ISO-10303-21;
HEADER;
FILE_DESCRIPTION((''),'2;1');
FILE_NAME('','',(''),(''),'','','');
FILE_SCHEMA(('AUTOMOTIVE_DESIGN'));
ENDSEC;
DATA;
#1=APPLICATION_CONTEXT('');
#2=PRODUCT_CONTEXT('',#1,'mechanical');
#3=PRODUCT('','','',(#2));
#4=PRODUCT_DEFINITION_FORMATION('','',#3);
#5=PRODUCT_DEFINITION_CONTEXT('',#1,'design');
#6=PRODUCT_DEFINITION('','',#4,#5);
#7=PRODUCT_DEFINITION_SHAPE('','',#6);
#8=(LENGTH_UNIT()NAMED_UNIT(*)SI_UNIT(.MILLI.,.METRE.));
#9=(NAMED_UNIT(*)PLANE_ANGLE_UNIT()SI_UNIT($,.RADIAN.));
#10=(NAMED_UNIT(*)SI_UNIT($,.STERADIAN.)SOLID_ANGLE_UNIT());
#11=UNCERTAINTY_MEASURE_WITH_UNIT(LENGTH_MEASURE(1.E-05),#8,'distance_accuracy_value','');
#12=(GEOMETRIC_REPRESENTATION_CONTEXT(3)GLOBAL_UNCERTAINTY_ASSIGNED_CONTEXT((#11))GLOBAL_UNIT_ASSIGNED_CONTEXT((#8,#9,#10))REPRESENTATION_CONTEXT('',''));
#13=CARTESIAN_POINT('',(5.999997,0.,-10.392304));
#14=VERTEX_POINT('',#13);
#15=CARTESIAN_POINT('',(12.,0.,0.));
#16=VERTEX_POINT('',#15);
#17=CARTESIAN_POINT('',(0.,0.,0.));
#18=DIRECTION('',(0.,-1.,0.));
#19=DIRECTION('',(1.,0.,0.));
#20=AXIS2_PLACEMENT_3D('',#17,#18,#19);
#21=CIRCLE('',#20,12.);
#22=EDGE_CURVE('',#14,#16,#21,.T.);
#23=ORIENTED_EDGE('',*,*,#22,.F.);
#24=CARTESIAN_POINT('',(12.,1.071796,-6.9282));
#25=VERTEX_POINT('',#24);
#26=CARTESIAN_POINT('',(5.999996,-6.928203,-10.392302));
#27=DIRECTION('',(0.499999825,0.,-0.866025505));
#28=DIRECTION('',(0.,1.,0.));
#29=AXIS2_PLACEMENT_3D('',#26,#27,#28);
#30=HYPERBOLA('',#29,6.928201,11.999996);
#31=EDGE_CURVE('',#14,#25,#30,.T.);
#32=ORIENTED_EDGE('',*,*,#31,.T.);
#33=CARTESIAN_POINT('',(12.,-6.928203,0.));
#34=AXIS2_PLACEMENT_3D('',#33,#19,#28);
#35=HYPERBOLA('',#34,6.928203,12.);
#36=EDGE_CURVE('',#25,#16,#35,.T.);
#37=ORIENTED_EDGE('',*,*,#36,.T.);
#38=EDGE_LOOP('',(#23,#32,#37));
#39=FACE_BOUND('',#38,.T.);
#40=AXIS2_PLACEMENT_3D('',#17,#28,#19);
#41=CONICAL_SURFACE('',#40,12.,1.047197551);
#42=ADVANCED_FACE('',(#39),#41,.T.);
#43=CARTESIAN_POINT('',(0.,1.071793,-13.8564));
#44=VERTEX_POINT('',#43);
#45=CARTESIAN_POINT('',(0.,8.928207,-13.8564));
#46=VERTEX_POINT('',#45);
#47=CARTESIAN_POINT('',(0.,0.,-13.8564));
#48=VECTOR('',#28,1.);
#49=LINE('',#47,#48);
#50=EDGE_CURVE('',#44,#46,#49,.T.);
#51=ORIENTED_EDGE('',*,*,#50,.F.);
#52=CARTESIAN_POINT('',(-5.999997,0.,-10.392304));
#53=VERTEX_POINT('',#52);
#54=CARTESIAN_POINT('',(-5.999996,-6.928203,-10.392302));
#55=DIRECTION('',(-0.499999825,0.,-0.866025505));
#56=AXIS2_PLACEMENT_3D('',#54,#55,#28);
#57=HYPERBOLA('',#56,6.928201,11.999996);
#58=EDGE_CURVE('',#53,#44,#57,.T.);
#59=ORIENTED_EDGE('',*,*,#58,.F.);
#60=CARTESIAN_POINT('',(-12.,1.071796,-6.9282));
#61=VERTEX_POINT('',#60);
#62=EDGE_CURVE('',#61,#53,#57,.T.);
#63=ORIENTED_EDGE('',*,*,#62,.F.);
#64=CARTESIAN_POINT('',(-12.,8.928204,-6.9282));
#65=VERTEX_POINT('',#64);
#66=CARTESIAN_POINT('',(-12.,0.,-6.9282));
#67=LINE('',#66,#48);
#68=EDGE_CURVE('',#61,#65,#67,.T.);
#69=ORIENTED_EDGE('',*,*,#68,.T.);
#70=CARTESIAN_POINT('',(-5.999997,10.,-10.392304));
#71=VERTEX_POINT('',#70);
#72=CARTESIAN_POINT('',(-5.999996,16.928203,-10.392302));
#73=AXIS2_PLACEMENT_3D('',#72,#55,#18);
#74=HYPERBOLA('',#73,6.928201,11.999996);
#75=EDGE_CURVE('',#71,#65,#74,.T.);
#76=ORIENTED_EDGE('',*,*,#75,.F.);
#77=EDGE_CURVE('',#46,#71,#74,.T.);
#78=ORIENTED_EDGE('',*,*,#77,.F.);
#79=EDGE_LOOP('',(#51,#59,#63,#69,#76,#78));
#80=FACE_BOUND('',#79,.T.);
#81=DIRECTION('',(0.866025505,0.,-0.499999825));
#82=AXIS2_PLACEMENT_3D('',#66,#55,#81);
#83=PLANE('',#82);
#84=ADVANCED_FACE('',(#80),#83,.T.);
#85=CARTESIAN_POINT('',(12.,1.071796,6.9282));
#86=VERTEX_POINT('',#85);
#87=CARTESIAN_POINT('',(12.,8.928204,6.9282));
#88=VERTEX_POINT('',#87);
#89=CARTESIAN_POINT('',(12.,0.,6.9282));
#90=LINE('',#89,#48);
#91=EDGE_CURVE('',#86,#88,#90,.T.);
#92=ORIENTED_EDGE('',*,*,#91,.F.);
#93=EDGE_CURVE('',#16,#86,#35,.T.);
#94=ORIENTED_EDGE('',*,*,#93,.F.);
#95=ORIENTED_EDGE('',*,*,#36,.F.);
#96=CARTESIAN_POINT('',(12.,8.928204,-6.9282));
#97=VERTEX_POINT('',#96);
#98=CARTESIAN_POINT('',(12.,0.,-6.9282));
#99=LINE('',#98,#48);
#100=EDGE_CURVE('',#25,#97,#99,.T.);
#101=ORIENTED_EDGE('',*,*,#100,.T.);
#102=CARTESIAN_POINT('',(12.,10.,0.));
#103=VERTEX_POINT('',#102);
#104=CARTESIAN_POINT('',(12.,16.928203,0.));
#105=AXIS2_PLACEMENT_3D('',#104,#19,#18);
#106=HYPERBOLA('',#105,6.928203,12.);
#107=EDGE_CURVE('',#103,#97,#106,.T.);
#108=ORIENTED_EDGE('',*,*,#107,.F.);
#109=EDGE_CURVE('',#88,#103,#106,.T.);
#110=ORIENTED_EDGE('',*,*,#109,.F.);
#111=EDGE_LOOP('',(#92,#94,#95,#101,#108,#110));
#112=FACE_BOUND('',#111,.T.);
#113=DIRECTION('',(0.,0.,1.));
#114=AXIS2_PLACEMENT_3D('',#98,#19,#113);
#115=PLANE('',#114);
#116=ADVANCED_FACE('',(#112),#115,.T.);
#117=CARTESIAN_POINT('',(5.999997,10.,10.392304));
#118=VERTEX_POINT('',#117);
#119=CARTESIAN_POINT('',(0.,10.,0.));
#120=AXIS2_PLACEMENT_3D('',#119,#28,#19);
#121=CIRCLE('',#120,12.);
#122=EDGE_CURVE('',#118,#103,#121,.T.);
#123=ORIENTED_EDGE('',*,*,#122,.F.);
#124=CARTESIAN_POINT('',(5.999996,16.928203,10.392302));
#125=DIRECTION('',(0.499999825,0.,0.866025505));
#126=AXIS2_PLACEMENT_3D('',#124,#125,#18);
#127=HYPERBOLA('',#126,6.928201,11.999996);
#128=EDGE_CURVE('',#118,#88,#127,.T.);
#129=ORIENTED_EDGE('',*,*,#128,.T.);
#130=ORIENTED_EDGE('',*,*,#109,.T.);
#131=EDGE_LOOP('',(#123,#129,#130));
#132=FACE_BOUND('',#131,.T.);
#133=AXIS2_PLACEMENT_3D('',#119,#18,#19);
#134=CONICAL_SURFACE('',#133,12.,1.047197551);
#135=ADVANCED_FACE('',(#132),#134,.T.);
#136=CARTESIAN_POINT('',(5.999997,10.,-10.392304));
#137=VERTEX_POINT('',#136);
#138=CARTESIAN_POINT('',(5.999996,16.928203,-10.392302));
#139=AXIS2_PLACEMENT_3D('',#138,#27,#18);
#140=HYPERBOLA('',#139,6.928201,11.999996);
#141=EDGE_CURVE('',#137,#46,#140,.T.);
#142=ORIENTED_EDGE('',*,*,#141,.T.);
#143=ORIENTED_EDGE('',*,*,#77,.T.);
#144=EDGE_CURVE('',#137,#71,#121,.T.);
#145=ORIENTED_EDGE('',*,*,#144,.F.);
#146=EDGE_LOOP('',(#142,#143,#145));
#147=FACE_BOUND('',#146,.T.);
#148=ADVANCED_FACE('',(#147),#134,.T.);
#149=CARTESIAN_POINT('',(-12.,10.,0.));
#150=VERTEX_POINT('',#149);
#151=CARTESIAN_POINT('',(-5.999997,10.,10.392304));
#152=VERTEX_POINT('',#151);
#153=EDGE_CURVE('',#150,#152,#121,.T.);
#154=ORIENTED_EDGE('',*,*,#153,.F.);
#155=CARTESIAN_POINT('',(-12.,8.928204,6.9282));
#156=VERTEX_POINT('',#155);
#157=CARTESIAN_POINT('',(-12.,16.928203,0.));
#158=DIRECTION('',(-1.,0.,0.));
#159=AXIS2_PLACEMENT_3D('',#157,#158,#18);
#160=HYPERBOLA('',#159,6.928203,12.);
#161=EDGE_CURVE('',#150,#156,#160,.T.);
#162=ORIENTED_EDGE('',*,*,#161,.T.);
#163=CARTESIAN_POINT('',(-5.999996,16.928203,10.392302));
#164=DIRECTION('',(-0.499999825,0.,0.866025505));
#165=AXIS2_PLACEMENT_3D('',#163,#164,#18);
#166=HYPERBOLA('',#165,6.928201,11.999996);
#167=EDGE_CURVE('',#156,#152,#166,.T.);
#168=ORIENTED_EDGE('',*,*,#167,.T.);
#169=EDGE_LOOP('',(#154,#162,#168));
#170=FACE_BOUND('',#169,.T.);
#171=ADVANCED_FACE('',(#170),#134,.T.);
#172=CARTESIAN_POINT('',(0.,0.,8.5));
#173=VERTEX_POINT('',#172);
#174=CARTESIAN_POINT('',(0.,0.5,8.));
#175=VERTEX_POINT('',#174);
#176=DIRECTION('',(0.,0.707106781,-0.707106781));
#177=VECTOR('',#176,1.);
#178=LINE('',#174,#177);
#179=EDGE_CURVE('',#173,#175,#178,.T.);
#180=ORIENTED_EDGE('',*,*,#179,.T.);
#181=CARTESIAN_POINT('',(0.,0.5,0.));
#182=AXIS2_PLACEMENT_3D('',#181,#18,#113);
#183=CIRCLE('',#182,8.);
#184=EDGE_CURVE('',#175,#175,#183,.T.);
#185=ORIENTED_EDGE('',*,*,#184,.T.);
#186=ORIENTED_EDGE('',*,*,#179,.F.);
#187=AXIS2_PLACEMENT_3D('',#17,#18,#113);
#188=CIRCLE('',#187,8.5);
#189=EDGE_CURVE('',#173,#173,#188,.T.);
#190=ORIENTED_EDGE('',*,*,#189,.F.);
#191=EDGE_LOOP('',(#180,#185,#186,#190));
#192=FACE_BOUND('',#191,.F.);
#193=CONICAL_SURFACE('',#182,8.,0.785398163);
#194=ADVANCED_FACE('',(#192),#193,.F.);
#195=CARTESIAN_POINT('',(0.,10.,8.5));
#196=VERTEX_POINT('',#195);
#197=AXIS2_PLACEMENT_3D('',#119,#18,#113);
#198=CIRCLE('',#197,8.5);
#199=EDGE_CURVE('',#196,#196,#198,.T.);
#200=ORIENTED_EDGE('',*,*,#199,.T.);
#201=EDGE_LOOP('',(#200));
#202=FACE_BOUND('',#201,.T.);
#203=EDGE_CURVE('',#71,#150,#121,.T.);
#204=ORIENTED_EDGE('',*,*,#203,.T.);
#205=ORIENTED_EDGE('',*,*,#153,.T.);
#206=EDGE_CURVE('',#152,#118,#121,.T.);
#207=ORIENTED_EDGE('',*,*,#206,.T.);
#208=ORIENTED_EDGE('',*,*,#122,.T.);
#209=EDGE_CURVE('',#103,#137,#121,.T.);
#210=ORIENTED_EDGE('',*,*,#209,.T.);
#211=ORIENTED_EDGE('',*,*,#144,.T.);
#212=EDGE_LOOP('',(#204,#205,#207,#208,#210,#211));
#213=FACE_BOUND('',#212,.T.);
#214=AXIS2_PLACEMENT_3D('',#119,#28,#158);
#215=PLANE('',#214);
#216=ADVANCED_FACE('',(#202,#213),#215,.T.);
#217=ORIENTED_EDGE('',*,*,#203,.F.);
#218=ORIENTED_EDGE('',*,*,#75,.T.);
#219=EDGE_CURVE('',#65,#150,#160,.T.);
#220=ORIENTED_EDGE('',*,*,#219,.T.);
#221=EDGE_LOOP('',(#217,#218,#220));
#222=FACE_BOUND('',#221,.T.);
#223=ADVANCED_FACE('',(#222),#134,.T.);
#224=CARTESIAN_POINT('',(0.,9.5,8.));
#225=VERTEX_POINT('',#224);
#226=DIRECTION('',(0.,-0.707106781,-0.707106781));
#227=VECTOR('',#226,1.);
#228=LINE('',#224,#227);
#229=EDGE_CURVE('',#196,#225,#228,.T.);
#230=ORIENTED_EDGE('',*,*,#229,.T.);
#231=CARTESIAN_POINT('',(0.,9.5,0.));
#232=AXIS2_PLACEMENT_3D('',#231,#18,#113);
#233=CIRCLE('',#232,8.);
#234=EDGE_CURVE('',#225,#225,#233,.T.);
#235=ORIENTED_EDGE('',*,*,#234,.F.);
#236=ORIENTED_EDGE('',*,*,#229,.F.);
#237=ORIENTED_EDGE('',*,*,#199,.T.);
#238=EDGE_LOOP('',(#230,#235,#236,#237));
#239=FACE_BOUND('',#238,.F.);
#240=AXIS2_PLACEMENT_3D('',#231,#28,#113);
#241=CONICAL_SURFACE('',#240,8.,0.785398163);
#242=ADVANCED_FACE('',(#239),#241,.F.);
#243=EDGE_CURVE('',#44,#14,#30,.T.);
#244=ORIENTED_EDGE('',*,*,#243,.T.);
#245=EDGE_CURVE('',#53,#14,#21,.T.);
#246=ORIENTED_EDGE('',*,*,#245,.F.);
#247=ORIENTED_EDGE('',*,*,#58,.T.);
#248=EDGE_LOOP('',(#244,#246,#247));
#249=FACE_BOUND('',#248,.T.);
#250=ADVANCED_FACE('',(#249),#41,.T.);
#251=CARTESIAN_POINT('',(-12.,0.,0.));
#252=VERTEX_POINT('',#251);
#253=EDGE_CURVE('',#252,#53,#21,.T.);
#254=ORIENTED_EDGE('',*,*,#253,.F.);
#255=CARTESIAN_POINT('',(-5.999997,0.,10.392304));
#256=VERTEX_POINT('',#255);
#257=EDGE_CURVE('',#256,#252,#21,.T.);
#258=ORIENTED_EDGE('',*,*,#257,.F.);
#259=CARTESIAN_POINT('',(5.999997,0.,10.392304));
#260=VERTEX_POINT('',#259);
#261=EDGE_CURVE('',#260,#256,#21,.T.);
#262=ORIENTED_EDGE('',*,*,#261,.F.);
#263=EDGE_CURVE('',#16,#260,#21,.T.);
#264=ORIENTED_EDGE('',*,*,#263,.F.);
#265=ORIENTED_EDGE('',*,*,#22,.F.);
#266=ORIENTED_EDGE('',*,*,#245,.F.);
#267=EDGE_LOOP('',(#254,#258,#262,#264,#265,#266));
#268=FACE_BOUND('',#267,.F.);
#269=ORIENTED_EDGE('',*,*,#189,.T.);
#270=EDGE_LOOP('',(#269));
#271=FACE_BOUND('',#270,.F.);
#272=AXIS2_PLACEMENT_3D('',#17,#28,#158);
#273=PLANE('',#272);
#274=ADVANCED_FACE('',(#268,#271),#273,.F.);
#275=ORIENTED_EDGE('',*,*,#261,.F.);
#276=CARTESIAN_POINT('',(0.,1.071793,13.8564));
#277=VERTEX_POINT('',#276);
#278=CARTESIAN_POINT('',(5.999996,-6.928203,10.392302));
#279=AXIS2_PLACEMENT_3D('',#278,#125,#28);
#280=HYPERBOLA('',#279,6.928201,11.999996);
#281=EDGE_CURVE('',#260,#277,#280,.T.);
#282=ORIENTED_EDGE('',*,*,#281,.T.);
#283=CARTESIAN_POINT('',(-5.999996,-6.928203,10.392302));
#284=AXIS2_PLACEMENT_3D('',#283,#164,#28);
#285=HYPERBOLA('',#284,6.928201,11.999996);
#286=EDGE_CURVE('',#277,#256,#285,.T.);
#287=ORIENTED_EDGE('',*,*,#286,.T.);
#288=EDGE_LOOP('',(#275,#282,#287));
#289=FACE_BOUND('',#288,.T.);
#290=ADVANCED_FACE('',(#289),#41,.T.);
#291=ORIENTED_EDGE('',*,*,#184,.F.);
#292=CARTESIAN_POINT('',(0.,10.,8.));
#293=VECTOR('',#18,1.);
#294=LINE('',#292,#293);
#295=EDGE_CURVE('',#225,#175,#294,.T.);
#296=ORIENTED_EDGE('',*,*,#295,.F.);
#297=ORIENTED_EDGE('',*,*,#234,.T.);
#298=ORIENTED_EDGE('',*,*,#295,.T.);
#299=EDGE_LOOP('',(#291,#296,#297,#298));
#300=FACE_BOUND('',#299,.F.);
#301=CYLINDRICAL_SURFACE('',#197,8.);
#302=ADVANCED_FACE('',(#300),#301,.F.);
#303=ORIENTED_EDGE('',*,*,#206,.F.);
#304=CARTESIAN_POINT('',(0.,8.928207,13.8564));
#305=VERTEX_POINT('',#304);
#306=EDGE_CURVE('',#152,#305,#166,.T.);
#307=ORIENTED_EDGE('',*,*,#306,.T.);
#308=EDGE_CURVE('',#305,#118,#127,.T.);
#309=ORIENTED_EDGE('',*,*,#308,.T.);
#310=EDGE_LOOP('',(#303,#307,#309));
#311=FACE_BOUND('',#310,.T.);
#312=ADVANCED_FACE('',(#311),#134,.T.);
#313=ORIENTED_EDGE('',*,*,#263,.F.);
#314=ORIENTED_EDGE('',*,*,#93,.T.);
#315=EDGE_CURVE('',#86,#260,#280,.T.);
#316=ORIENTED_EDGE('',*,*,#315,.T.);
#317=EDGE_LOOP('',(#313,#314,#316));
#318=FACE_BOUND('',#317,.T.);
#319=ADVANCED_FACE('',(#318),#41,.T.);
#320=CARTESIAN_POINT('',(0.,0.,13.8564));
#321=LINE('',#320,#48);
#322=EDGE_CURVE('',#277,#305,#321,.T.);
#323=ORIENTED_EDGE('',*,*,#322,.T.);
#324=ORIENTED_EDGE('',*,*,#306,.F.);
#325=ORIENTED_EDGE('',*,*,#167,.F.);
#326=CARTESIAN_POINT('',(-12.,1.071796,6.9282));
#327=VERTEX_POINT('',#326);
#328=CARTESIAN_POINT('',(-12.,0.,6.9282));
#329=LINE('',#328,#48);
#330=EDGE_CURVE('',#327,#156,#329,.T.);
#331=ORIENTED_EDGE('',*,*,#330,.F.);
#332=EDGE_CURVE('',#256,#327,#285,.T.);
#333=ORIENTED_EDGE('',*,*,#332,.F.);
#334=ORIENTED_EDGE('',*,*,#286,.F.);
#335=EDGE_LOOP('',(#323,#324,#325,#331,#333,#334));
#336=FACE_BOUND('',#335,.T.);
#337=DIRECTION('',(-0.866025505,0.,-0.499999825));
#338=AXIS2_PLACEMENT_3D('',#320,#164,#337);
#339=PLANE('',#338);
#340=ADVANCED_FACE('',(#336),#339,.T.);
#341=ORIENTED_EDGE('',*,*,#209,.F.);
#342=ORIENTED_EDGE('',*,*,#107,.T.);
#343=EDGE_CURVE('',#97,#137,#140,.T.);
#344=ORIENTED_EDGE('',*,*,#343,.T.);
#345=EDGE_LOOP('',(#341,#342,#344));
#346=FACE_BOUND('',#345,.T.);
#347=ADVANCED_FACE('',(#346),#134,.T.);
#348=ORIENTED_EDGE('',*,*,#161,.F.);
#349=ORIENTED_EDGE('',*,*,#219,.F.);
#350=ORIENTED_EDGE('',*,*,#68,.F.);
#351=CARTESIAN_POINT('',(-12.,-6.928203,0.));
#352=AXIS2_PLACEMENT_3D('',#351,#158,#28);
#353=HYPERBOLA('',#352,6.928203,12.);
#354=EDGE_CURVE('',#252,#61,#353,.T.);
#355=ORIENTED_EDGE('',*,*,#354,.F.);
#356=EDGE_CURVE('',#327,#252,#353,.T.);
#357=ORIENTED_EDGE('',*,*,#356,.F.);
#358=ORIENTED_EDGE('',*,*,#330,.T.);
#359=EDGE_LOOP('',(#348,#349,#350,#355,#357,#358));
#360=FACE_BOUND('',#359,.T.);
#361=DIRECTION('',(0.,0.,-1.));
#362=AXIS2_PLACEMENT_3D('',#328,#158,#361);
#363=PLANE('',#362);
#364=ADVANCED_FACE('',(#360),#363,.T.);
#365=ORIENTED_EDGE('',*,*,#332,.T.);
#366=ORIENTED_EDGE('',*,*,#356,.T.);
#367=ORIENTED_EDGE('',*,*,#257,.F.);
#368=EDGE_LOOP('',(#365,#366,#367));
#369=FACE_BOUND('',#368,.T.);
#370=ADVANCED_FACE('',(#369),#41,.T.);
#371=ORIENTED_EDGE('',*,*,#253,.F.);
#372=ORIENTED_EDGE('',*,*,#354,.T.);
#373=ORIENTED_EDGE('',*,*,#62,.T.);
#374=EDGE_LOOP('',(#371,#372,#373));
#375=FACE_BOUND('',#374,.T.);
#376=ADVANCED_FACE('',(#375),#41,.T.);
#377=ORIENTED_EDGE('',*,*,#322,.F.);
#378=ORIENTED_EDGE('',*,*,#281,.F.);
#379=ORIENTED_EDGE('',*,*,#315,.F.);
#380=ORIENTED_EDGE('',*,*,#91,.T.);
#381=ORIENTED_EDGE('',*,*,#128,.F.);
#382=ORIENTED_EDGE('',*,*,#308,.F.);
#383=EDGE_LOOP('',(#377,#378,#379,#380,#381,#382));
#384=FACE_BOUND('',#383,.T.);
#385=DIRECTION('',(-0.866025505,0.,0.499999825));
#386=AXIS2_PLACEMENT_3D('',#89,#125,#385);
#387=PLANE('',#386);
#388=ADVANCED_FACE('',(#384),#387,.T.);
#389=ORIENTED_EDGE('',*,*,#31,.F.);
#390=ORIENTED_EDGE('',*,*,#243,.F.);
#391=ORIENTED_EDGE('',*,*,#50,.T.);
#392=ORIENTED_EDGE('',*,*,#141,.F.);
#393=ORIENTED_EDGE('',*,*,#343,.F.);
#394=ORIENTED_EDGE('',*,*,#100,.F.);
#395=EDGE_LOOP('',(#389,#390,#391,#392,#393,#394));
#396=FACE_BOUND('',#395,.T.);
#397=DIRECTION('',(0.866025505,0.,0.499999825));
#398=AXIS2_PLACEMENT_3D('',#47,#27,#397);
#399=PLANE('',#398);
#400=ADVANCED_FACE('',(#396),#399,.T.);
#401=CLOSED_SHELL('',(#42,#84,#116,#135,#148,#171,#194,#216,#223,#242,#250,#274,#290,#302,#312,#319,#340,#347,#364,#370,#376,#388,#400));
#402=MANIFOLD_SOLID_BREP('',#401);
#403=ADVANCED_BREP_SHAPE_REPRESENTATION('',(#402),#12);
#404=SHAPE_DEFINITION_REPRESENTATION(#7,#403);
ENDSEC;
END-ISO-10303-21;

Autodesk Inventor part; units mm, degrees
ref_plane "YZ Plane" through (0, 0, 0) normal (1, 0, 0) x (0, 1, 0)
ref_plane "XZ Plane" through (0, 0, 0) normal (0, 1, 0) x (-1, 0, 0)
ref_plane "XY Plane" through (0, 0, 0) normal (0, 0, 1) x (1, 0, 0)
sketch "Sketch1" plane through (0, 0, 0) normal (0, 1, 0) x (-1, 0, 0)
  line L0 (12, -6.9282) -> (0, -13.8564)
  line L1 (0, -13.8564) -> (-12, -6.9282)
  line L2 (-12, -6.9282) -> (-12, 6.9282)
  line L3 (-12, 6.9282) -> (0, 13.8564)
  line L4 (0, 13.8564) -> (12, 6.9282)
  line L5 (12, 6.9282) -> (12, -6.9282)
  point P0 (0, 0)
  point P1 (0, 0)
  point P2 (-12, 0)
  point P3 (12, 0)
  dimension "d0" = 24
extrude "Extrusion1" add sketch "Sketch1" along normal blind 10
sketch "Sketch2" plane through (0, 10, 0) normal (0, 1, 0) x (1, 0, 0)
  circle A0 centre (0, 0) radius 12
extrude "Extrusion2" cut sketch "Sketch2" against normal blind 10 draft 60 keep common part
sketch "Sketch4" plane through (0, 0, 0) normal (0, -1, 0) x (1, 0, 0)
  circle A0 centre (0, 0) radius 12
extrude "Extrusion4" cut sketch "Sketch4" against normal blind 60 draft 60 keep common part
sketch "Sketch5" plane through (0, 10, 0) normal (0, 1, 0) x (1, 0, 0)
  point P0 (0, 0)
  point P1 (0, 0)
hole "Hole1" at (0, 10, 0) direction (0, -1, 0) diameter 16 end through all
thread "Thread2" size "M16x2" class "6H" standard "ANSI Metric M Profile" length 38
chamfer "Chamfer2" distance 0.5 angle 45 2 edges at (0, 10, -8) (0, 0, -8)
properties part number "csavar" material "Steel, Alloy"
